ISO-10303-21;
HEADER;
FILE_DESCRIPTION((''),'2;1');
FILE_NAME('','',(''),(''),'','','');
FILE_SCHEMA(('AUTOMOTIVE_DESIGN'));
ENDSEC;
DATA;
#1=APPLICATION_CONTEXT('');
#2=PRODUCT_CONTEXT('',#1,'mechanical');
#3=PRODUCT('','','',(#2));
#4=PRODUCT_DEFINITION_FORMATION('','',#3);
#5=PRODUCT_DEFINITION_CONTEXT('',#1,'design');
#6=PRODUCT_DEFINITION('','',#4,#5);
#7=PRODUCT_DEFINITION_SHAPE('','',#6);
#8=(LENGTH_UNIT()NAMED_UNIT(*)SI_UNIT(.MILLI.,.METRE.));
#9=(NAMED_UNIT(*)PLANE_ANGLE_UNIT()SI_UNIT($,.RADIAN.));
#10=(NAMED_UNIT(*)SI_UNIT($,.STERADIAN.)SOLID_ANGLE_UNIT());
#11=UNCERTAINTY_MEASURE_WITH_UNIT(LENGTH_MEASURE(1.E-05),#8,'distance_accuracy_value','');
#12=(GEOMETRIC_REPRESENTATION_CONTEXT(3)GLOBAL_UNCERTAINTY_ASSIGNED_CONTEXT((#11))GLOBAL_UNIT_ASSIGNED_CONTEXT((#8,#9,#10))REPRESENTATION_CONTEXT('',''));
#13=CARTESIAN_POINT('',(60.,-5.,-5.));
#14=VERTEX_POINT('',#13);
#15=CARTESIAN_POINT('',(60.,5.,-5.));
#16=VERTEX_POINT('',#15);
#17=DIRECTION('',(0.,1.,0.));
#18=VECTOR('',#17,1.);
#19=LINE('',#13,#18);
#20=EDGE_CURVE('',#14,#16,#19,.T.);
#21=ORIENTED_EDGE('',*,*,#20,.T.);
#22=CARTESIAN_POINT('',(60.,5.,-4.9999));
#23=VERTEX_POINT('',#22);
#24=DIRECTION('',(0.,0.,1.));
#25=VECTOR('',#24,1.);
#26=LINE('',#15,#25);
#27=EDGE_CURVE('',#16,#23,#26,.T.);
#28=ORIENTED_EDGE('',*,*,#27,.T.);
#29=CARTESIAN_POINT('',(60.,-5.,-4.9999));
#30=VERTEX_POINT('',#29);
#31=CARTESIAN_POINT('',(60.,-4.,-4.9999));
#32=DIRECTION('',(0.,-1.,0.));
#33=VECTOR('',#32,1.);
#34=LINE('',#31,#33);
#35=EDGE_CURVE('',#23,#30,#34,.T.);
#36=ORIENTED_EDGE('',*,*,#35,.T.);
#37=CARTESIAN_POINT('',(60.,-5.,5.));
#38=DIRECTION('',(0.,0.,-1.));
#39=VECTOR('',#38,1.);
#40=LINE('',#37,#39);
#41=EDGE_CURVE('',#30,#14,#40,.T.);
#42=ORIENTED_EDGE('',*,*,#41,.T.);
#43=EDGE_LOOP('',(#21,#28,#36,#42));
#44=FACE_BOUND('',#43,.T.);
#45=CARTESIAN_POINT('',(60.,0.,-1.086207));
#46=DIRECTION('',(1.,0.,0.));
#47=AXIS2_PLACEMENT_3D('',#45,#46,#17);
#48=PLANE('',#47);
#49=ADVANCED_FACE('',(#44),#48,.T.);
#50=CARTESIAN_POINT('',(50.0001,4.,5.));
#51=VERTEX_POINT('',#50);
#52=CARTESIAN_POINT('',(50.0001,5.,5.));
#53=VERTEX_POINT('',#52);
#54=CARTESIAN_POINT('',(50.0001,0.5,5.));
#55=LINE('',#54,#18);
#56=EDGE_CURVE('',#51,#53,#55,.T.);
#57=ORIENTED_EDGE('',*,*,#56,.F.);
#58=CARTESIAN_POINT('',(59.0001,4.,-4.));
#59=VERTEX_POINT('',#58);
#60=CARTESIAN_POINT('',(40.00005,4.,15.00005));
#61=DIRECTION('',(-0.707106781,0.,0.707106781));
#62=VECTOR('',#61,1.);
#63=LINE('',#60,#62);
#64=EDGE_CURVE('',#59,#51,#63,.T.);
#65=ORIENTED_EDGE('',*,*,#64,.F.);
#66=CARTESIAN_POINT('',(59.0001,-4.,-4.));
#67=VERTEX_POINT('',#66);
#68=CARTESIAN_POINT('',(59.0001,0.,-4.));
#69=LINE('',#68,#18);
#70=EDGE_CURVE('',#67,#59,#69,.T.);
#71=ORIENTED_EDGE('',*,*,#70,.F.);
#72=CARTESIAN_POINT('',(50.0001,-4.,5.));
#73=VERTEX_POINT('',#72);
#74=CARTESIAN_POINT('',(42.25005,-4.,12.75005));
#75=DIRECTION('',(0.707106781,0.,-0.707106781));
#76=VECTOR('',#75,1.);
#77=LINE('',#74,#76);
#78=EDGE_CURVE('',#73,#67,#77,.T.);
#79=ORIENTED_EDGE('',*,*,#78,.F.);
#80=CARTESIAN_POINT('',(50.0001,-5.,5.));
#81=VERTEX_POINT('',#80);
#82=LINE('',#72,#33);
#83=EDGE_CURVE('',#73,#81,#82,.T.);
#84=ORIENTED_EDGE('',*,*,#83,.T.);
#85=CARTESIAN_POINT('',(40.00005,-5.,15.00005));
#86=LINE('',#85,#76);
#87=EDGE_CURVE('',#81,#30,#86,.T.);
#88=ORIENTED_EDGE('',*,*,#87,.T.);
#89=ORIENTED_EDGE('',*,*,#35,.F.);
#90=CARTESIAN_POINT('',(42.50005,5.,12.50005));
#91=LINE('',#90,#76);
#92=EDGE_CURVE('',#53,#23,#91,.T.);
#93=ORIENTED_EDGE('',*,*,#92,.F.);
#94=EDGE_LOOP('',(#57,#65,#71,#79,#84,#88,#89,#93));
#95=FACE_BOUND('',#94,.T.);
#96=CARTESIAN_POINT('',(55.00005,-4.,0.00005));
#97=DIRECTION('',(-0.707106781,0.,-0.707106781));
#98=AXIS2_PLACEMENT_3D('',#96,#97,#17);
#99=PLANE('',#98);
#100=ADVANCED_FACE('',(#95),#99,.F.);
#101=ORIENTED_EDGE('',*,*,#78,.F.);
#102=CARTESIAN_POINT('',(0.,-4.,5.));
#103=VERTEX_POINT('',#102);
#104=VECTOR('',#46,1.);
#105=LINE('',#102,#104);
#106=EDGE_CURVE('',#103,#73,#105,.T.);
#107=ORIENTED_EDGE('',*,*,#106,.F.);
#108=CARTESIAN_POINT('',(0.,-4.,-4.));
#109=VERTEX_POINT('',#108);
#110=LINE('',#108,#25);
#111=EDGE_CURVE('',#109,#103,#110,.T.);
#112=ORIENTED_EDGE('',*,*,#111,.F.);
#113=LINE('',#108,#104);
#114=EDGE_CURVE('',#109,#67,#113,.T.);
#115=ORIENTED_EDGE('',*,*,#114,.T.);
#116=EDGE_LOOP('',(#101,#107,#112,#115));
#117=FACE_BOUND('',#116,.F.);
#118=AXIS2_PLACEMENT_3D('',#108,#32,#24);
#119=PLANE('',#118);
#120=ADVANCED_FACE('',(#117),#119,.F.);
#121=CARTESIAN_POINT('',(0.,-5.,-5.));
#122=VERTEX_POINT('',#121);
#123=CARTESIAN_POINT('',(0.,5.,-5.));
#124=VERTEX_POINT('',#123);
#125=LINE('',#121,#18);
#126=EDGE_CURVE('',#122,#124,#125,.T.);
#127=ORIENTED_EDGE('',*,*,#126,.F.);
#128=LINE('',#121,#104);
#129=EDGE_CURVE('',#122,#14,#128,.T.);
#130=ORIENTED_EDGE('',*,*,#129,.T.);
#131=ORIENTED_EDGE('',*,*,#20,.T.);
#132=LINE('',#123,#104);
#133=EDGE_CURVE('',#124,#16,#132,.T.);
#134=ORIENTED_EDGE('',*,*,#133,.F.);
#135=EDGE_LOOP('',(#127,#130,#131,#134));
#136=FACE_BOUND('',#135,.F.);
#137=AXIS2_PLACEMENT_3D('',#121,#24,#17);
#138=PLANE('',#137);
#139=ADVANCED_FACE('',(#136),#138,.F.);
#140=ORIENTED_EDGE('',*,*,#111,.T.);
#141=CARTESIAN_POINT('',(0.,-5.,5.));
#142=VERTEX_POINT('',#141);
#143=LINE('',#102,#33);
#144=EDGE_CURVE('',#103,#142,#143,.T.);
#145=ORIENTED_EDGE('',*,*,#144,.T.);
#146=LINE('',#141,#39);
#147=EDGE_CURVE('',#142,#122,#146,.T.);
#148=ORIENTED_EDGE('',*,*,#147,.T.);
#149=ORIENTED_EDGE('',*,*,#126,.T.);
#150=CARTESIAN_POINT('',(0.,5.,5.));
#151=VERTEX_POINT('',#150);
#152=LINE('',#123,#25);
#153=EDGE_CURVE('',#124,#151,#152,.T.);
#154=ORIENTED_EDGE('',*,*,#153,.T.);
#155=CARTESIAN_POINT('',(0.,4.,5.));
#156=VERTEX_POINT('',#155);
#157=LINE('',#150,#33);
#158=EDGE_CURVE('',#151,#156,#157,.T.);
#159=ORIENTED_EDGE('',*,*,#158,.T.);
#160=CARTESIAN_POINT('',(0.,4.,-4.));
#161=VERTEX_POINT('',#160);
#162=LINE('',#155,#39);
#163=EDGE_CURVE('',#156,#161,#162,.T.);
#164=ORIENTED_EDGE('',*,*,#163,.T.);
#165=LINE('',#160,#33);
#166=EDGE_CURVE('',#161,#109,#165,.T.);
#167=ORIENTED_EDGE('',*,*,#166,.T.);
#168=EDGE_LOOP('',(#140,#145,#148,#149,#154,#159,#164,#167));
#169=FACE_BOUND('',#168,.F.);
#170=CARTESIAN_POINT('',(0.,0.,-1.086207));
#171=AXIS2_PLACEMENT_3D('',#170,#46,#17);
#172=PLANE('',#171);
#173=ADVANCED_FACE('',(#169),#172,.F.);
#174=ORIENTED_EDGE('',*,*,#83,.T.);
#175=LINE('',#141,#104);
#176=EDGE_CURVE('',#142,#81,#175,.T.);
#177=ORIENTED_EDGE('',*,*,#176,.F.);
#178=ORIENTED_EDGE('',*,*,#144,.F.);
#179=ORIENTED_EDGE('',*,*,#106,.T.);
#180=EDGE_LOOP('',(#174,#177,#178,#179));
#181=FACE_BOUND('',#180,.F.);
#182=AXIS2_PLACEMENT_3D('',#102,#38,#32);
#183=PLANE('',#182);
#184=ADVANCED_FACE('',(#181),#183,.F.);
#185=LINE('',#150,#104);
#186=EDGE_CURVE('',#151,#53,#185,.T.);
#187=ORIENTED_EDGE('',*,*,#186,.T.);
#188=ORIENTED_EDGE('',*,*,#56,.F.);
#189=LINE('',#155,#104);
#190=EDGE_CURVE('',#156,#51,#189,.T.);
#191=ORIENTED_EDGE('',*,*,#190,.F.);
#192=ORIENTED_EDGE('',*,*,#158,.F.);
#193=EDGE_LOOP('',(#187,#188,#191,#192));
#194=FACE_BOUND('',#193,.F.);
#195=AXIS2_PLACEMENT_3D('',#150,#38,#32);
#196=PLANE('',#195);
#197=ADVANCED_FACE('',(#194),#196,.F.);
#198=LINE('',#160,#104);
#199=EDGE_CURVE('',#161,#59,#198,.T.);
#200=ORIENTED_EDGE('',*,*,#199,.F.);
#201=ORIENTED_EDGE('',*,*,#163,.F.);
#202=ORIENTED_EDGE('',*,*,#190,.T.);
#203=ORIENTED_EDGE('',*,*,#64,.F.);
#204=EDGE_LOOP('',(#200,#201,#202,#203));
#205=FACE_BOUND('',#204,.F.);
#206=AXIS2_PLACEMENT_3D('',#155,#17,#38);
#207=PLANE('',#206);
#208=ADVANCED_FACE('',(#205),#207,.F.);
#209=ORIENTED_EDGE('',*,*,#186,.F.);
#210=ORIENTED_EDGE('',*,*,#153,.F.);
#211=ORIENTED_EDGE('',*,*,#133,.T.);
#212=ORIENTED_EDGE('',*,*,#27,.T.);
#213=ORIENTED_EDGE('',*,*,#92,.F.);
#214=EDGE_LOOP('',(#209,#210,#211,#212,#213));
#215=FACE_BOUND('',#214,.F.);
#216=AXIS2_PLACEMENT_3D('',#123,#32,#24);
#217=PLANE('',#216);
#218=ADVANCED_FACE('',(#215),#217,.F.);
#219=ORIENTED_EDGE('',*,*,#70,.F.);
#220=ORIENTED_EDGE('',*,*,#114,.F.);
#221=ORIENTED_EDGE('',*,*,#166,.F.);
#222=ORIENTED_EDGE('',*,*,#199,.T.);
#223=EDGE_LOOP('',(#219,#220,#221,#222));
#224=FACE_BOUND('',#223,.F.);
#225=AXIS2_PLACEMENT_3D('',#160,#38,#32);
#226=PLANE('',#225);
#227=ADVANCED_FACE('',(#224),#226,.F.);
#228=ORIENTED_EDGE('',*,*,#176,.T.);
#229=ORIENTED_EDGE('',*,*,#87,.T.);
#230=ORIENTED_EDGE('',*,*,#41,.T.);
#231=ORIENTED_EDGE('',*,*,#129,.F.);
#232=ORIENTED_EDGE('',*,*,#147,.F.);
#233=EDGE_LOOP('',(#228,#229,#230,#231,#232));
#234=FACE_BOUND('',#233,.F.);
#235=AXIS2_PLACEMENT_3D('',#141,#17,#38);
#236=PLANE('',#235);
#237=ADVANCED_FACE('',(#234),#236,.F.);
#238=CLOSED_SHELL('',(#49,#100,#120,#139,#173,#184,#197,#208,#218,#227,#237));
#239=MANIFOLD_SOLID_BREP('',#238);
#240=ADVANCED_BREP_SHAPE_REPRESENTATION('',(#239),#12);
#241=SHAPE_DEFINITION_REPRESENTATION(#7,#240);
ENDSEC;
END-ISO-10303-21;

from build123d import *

# Parameters (mm, degrees)
F1_DEPTH   = 60
F2_C1_SIZE = 9.9999


# Not quite as in the source:
# - a fillet or chamfer is up to 0.001 mm smaller than in the source, because OpenCascade refuses the exact size


with BuildPart() as f1:
    # F0 (on Right) → F1 (new body)
    with BuildSketch(Plane.YZ):
        Polygon((-4, 5), (-5, 5), (-5, -5), (5, -5), (5, 5), (4, 5), (4, -4), (-4, -4), align=None)
    extrude(amount=F1_DEPTH)

    # F2: chamfer of 10 on 2 edges, made by hand

    # F2_c1 (size 10 in the source; OpenCascade refuses exactly that, so slightly less here)
    f2_c1_edges = [f1.edges().sort_by_distance(p)[0] for p in [
        (60, -4.5, 5),
    ]]
    chamfer(f2_c1_edges, length=F2_C1_SIZE)


solid = f1.part
